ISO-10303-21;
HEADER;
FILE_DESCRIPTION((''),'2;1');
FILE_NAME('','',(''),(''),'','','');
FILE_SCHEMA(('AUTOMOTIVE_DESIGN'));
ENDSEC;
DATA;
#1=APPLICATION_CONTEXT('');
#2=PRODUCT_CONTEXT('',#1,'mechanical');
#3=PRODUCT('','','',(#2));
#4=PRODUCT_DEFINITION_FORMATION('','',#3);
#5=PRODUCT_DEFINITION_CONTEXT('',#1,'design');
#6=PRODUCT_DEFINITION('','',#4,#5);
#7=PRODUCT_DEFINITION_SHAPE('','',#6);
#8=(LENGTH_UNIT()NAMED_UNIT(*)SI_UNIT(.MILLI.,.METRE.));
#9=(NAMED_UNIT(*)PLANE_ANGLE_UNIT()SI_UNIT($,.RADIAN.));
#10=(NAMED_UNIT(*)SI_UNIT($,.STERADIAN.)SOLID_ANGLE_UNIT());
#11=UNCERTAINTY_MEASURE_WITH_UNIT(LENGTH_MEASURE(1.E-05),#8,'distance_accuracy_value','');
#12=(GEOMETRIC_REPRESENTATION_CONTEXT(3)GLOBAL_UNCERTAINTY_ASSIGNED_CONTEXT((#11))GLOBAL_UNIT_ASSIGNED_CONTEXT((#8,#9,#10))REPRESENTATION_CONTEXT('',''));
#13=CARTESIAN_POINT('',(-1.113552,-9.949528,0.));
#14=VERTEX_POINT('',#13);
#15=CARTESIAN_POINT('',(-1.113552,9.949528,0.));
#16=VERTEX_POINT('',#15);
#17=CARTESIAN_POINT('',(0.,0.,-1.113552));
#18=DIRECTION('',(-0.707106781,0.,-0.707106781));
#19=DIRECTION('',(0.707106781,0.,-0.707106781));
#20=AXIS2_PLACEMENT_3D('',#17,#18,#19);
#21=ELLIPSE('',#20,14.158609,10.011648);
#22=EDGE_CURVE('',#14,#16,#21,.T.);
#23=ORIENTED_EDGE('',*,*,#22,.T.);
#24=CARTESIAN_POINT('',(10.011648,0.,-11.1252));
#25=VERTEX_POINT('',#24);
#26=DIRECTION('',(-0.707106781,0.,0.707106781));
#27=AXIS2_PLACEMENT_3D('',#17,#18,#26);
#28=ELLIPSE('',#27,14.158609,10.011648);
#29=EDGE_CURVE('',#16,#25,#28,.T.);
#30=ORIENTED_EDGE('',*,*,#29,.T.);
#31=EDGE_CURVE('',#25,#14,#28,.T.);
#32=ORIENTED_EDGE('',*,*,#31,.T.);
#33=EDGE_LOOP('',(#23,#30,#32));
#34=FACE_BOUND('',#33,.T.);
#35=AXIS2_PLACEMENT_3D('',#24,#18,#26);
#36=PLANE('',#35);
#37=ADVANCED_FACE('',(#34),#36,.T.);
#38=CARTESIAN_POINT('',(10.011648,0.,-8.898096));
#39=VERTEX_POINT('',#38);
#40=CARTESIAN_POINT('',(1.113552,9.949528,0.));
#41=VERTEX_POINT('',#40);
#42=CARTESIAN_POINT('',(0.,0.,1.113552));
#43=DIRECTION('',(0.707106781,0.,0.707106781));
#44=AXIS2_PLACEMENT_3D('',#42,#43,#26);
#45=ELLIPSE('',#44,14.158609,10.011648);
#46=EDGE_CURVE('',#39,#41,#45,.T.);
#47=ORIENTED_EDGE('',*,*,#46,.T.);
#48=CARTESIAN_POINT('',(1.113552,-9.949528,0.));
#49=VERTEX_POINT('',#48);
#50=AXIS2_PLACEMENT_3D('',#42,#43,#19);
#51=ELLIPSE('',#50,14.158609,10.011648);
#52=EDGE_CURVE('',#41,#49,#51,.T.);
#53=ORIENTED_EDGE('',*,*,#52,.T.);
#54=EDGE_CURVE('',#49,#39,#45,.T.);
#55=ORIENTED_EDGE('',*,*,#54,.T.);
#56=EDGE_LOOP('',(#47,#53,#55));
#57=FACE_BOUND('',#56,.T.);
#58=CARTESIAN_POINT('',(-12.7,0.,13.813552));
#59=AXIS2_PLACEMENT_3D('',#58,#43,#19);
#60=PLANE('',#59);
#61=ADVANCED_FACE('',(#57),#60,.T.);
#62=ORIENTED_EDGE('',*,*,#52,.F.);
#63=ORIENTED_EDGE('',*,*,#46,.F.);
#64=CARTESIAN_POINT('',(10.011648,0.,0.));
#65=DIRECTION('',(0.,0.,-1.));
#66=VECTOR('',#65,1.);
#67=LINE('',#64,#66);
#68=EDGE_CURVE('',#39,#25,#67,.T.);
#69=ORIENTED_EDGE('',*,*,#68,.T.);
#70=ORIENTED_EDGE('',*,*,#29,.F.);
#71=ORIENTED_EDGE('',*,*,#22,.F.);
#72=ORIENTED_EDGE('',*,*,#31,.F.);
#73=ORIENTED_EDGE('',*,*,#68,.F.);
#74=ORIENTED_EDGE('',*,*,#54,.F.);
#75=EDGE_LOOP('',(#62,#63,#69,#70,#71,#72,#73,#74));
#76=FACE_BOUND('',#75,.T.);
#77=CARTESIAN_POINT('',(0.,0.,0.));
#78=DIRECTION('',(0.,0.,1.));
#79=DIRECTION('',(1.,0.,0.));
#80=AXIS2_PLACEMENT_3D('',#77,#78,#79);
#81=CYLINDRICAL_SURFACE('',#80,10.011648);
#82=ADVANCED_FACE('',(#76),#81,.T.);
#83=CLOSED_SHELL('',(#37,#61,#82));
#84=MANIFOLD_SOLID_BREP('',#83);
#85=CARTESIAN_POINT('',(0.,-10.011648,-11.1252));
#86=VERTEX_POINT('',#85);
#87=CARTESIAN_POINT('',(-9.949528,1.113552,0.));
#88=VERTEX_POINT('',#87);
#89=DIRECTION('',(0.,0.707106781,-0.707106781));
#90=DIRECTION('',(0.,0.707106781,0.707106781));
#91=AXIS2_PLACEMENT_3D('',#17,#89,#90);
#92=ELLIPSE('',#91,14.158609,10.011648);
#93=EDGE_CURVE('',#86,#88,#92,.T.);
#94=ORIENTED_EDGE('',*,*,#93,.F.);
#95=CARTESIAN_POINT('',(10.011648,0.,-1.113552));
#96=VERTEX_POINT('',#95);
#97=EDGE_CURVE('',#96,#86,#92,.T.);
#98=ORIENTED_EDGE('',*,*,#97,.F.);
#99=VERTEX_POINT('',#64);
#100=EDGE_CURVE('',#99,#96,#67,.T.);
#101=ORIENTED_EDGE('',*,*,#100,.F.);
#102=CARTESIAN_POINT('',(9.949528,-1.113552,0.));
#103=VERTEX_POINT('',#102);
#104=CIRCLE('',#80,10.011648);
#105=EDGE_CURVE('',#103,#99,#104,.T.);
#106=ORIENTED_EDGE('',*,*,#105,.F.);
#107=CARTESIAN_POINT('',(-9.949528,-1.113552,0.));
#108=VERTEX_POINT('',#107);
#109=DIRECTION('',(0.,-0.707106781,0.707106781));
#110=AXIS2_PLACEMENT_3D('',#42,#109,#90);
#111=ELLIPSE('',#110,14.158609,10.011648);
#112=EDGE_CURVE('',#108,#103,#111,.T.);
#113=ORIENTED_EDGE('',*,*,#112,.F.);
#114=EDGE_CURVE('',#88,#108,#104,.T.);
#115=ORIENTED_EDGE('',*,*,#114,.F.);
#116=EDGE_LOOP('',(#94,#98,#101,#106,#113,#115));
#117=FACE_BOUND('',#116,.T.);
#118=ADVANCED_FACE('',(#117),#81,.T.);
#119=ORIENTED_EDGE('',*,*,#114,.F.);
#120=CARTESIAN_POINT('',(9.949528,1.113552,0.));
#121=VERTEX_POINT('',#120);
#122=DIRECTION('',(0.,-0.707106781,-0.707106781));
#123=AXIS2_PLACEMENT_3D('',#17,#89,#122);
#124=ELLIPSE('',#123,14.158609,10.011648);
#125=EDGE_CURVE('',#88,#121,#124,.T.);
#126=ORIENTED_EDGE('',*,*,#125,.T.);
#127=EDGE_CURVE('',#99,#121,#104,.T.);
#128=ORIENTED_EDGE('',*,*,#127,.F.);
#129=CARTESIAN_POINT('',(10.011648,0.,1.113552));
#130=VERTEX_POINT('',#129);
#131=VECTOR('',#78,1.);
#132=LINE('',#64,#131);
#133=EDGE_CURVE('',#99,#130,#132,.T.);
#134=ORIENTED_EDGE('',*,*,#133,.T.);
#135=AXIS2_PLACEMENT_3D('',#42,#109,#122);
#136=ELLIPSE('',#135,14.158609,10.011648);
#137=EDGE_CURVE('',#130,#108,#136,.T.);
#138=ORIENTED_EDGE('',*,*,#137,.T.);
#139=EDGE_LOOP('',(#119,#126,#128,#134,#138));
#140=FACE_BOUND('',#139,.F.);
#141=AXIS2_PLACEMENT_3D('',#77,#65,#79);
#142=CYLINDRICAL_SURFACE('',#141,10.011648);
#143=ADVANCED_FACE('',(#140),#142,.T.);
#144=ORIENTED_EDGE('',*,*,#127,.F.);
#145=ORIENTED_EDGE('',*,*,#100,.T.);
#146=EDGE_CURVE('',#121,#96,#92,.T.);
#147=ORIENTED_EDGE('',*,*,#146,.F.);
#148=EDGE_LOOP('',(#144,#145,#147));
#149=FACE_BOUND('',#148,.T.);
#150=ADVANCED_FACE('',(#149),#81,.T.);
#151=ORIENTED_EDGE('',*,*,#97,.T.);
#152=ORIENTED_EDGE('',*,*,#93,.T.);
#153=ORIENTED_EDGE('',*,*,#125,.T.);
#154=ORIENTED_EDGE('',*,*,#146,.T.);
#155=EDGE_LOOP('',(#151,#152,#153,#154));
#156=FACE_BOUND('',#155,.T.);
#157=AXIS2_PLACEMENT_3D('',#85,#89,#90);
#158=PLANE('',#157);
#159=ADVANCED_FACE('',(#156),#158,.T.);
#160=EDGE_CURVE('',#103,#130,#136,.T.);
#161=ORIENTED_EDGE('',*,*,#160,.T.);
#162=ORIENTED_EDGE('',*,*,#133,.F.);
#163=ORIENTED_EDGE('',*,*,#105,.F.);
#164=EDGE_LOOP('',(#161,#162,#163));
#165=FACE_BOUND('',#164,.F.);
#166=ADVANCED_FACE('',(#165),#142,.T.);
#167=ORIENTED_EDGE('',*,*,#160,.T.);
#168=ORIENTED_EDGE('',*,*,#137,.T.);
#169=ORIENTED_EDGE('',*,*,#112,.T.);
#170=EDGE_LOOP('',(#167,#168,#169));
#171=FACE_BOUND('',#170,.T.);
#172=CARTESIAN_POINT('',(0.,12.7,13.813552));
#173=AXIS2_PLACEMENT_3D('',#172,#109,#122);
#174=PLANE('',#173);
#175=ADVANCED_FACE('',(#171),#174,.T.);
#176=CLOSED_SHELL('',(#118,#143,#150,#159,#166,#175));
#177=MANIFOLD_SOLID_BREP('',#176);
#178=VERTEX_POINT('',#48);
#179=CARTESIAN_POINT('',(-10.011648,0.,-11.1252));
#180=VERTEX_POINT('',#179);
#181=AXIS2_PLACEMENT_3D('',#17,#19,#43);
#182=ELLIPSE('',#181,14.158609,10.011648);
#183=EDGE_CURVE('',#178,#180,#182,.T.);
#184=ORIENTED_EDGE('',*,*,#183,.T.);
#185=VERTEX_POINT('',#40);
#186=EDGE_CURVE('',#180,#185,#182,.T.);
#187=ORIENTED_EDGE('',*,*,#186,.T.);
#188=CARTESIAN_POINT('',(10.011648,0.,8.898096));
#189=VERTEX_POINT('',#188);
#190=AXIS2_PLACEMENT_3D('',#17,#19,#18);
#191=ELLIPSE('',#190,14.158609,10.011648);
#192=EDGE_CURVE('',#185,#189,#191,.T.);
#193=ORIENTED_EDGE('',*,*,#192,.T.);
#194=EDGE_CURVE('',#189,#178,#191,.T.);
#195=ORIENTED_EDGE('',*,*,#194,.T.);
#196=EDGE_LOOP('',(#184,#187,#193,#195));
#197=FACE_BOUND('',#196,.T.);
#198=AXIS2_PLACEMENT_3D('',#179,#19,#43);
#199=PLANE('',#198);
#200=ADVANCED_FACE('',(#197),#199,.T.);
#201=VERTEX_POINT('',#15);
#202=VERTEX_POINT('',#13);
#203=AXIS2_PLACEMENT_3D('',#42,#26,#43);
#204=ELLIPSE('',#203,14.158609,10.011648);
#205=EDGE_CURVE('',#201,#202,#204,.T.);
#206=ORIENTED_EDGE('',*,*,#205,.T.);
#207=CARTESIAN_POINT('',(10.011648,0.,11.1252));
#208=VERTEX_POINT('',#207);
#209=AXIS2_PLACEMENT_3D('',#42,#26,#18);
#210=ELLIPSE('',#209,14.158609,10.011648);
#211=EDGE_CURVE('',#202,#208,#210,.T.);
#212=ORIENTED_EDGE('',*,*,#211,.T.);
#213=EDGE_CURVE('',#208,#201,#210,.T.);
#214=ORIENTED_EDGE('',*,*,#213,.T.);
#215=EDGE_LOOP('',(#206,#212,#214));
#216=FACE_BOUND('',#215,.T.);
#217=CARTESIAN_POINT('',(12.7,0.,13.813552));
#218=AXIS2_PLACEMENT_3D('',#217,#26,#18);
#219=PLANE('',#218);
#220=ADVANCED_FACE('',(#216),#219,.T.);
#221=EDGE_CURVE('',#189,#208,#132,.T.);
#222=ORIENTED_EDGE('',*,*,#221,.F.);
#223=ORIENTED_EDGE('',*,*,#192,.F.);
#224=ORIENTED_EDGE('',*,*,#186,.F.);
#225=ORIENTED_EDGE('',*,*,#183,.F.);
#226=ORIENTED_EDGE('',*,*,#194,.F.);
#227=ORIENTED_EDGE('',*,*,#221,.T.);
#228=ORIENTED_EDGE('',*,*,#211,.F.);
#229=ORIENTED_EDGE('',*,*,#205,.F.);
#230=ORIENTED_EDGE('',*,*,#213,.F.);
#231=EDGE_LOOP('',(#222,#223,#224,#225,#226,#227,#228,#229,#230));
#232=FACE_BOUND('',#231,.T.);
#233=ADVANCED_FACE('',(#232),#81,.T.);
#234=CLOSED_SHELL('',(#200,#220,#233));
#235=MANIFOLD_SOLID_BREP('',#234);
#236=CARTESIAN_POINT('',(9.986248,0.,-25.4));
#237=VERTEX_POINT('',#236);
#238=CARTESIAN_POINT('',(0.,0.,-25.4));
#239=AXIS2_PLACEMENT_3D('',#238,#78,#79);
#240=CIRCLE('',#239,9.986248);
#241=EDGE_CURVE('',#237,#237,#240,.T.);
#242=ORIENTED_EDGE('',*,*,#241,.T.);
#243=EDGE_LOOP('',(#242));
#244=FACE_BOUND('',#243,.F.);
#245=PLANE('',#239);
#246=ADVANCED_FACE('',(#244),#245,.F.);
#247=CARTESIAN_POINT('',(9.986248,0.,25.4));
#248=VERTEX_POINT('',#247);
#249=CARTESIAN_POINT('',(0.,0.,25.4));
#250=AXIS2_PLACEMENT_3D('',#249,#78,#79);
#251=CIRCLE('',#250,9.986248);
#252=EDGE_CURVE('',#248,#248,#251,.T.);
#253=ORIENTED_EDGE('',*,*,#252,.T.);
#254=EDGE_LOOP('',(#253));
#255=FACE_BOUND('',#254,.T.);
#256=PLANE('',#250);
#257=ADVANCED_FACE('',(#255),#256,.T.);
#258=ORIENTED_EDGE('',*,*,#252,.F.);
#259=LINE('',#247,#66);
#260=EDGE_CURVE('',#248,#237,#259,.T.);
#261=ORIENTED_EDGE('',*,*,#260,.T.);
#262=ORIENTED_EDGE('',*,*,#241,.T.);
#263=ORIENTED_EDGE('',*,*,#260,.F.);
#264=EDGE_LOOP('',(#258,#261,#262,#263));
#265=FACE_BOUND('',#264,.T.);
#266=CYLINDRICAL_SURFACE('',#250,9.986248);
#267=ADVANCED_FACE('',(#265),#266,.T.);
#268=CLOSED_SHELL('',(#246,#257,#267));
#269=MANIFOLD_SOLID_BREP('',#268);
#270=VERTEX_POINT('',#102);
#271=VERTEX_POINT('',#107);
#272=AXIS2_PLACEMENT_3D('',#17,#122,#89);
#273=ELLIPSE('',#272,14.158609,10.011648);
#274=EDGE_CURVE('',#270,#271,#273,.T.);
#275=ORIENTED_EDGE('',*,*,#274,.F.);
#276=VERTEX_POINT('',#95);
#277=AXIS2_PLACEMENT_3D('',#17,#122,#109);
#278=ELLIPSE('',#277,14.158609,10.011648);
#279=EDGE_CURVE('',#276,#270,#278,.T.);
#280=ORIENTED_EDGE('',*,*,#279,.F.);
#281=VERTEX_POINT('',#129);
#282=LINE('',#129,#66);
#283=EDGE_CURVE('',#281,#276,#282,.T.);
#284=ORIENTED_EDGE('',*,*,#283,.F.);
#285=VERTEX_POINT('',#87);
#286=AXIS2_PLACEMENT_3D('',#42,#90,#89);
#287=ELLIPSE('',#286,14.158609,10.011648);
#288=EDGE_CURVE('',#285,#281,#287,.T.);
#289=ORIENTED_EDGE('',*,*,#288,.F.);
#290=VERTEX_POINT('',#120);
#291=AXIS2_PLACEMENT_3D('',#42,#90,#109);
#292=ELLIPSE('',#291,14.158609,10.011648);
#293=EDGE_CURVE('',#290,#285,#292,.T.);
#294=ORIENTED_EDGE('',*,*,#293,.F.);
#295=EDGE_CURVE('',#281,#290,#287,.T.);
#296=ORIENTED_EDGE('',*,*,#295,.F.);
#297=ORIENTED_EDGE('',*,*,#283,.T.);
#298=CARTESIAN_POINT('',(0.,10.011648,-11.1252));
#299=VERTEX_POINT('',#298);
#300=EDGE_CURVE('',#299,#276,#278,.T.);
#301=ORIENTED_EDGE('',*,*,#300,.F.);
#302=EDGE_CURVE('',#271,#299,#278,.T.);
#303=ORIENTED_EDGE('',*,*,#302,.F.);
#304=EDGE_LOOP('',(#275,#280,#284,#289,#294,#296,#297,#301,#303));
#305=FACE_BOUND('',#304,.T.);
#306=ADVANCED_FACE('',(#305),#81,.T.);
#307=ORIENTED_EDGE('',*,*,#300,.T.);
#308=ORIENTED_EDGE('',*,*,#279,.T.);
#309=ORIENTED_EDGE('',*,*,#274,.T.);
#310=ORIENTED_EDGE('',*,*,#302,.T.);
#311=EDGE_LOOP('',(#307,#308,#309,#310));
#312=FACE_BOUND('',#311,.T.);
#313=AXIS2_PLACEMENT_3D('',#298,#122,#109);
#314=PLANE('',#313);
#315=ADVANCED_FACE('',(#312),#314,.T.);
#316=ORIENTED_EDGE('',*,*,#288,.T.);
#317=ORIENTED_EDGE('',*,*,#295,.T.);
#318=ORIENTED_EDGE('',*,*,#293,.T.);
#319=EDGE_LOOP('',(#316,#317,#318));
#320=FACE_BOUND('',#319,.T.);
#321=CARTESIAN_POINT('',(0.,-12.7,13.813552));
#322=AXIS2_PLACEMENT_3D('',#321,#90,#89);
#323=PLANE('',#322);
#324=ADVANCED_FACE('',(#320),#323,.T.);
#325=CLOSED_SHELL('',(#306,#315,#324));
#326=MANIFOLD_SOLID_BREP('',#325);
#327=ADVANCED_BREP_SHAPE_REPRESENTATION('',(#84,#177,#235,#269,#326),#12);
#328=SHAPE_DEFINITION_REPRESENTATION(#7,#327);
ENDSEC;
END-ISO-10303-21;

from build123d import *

# Parameters (mm, degrees)
F0_W          = 25.4
F0_H          = 25.4
F1_DEPTH      = 25.4
F3_DEPTH      = 12.7
F5_COUNT      = 4
F6_R          = 20.1833985855
F6_R_2        = 10.011648241
F7_DEPTH      = 25.401
F7_DEPTH_BACK = 25.401
F8_R          = 27.6664771381
F8_R_2        = 9.986248241
F9_DEPTH      = 50.801


with BuildPart() as f1:
    # F0 (on Top) → F1 (new body, symmetric)
    with BuildSketch(Plane.XY):
        Rectangle(F0_W, F0_H)
    extrude(amount=F1_DEPTH, both=True)


with BuildPart() as f3:
    # F2 (on Front) → F3 (new body, symmetric)
    with BuildSketch(Plane.XZ):
        Polygon((13.813551759, 12.7), (12.7, 13.813551759), (-11.1252, -10.011648241), (-10.011648241, -11.1252), align=None)
    extrude(amount=F3_DEPTH, both=True)


with BuildPart() as f5_1:
    # F5: instance of F3
    add(f3.part.rotate(Axis((0, 0, 26.6196299344), (0, 0, 1)), 1 * 360 / F5_COUNT))


with BuildPart() as f5_2:
    # F5: instance of F3
    add(f3.part.rotate(Axis((0, 0, 26.6196299344), (0, 0, 1)), 2 * 360 / F5_COUNT))


with BuildPart() as f5_3:
    # F5: instance of F3
    add(f3.part.rotate(Axis((0, 0, 26.6196299344), (0, 0, 1)), 3 * 360 / F5_COUNT))


with BuildPart() as f7_tool:
    # F6 (on Top) → F7 (new body, two sides)
    with BuildSketch(Plane.XY) as f7_sk:
        Circle(F6_R)
        Circle(F6_R_2, mode=Mode.SUBTRACT)
    extrude(amount=F7_DEPTH)
    extrude(f7_sk.sketch, amount=-F7_DEPTH_BACK)


with BuildPart() as f1_1:
    add(f1.part)

    # F7: cut by f7_tool
    add(f7_tool.part, mode=Mode.SUBTRACT)

    # F8 (on face) → F9 (cut, through all)
    with BuildSketch(Plane.XY.offset(25.4)):
        Circle(F8_R)
        Circle(F8_R_2, mode=Mode.SUBTRACT)
    extrude(amount=-F9_DEPTH, mode=Mode.SUBTRACT)


with BuildPart() as f3_1:
    add(f3.part)

    # F7: cut by f7_tool
    add(f7_tool.part, mode=Mode.SUBTRACT)


with BuildPart() as f5_1_1:
    add(f5_1.part)

    # F7: cut by f7_tool
    add(f7_tool.part, mode=Mode.SUBTRACT)


with BuildPart() as f5_2_1:
    add(f5_2.part)

    # F7: cut by f7_tool
    add(f7_tool.part, mode=Mode.SUBTRACT)


with BuildPart() as f5_3_1:
    add(f5_3.part)

    # F7: cut by f7_tool
    add(f7_tool.part, mode=Mode.SUBTRACT)


solid = Compound([f1_1.part, f3_1.part, f5_1_1.part, f5_2_1.part, f5_3_1.part])
